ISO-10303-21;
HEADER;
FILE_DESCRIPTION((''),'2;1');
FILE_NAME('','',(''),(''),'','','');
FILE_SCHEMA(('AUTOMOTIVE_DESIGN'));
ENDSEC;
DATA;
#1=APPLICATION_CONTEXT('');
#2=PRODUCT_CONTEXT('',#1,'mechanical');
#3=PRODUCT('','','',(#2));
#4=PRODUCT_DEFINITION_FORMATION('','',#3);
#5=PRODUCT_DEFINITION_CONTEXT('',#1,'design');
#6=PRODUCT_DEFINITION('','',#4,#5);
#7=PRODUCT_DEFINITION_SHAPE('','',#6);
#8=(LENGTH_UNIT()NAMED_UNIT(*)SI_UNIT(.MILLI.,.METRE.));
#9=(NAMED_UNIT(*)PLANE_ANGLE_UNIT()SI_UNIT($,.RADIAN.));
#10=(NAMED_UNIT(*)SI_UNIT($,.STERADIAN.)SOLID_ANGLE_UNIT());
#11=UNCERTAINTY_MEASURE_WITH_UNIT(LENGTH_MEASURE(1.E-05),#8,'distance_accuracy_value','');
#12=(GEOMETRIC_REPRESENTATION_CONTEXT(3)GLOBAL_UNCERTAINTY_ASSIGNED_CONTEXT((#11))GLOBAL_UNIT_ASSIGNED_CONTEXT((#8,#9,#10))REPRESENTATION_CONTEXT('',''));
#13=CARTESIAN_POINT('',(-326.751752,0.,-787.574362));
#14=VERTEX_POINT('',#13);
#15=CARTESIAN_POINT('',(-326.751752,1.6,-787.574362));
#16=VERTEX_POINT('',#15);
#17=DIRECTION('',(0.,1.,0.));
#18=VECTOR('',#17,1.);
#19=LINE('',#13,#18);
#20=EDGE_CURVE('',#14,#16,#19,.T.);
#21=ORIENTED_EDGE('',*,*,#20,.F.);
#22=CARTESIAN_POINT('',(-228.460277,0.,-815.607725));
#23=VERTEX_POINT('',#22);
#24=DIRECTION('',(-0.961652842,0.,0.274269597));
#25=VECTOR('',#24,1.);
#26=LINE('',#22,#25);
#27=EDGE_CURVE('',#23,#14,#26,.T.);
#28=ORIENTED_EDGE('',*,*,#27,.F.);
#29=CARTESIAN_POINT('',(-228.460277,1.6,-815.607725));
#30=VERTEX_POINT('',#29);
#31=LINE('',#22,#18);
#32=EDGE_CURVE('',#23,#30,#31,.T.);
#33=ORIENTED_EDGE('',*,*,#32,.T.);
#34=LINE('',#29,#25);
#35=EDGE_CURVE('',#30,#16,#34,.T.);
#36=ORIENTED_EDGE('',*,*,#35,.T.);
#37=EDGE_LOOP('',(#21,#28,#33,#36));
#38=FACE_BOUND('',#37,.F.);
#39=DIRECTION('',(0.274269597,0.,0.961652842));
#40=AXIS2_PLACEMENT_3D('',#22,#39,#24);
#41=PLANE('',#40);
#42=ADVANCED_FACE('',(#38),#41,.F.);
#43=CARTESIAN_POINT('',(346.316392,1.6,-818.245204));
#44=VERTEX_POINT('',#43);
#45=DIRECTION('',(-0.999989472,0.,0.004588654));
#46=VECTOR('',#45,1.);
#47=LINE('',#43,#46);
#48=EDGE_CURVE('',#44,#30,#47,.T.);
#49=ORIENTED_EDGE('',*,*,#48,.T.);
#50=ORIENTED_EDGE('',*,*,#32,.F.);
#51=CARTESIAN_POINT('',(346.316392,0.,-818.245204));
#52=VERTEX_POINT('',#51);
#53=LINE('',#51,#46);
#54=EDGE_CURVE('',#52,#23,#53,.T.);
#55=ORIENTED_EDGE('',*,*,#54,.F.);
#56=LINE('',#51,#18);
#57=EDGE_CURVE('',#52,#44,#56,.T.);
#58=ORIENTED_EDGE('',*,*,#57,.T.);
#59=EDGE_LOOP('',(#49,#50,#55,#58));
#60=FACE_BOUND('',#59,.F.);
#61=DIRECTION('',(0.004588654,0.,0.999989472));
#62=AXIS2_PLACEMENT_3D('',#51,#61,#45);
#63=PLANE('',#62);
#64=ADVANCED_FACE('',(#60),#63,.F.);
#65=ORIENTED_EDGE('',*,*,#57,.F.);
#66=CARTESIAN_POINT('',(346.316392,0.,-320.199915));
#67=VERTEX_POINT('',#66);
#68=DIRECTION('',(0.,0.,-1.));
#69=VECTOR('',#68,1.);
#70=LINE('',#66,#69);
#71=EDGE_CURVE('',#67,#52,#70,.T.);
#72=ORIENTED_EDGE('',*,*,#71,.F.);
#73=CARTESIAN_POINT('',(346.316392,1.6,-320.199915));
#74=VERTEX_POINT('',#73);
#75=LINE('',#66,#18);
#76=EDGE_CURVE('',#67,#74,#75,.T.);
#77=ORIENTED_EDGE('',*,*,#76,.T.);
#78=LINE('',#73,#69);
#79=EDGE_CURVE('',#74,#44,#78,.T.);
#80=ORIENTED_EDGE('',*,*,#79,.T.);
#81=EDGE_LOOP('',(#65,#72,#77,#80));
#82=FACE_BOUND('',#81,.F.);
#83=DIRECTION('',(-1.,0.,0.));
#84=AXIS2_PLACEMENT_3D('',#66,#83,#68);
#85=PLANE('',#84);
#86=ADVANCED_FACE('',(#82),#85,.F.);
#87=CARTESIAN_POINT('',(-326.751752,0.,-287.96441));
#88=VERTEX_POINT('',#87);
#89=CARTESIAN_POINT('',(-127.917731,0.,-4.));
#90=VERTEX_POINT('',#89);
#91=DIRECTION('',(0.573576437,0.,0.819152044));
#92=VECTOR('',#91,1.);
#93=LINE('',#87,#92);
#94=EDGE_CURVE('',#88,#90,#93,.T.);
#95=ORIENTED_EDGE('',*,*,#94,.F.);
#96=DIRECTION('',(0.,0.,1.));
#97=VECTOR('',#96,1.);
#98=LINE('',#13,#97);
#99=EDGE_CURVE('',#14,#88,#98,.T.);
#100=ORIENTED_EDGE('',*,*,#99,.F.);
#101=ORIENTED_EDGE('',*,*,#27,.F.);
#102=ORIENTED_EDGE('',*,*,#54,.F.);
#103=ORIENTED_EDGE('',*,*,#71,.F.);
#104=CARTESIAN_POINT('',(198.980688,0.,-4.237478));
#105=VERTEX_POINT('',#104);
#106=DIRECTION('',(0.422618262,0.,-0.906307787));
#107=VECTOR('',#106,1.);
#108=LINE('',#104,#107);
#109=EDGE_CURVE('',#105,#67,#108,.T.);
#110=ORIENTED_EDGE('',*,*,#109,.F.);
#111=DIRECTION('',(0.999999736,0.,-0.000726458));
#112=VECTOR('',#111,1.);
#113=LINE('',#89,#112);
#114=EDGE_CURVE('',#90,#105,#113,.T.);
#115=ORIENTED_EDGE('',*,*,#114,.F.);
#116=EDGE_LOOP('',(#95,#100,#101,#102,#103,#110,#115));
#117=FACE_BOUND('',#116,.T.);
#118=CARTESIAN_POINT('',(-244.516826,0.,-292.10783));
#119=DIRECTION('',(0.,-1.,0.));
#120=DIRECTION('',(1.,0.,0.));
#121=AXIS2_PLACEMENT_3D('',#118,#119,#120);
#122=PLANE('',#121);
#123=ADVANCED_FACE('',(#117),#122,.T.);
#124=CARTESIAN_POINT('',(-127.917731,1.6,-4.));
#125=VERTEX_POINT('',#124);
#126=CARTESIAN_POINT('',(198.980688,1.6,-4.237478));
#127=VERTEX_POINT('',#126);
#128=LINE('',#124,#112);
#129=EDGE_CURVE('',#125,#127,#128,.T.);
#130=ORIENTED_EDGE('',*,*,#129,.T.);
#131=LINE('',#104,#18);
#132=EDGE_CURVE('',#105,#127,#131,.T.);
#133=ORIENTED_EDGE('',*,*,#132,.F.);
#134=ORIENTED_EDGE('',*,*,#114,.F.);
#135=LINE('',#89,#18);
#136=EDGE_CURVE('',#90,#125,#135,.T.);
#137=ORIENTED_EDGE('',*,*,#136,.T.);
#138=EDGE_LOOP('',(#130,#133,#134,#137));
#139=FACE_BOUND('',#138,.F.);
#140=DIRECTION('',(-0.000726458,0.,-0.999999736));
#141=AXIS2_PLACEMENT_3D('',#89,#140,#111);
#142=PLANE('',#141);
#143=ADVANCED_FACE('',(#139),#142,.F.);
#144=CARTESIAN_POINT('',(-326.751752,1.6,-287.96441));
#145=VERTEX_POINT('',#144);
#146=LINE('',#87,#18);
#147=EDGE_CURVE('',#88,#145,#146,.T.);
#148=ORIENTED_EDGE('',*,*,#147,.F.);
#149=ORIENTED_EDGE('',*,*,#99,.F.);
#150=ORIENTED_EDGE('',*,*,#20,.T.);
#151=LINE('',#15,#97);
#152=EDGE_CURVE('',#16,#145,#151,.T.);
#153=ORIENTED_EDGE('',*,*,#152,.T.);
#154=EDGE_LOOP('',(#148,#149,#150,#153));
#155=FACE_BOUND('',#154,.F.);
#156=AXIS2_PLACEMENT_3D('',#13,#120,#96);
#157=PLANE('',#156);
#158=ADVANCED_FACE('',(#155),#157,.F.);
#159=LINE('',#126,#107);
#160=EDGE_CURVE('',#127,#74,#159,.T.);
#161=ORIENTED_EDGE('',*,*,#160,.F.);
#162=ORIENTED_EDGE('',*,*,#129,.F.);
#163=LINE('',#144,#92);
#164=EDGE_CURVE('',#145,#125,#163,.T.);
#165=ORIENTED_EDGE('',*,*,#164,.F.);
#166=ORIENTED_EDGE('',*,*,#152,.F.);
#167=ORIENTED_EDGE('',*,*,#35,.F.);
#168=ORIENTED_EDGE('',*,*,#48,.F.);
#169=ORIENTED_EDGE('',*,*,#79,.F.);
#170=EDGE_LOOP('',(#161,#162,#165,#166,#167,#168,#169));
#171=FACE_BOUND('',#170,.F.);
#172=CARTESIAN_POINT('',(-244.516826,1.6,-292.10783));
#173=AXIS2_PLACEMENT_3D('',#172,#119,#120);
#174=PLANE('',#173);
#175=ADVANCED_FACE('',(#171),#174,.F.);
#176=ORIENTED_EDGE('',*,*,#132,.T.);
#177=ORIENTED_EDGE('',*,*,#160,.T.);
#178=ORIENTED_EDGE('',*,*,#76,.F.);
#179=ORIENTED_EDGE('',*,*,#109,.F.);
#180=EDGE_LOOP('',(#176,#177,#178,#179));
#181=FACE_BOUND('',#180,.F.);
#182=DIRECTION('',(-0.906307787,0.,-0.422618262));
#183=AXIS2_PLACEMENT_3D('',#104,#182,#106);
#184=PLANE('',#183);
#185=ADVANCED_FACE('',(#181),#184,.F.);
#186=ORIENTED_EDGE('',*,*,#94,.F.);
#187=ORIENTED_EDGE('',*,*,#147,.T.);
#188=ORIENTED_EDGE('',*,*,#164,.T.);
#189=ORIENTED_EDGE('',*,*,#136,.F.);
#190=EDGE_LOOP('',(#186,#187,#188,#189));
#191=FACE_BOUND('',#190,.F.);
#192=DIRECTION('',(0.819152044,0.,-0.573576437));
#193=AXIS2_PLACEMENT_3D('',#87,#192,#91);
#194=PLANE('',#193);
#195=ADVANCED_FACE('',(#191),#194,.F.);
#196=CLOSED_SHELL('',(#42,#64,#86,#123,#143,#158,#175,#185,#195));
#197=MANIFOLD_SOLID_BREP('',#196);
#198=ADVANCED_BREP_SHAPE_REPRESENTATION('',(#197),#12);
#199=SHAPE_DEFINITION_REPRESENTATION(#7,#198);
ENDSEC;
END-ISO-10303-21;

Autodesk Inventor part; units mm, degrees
ref_plane "YZ Plane" through (0, 0, 0) normal (1, 0, 0) x (0, 1, 0)
ref_plane "XZ Plane" through (0, 0, 0) normal (0, 1, 0) x (-1, 0, 0)
ref_plane "XY Plane" through (0, 0, 0) normal (0, 0, 1) x (1, 0, 0)
ref_plane "Work Plane1" through (-244.516826, 0, -292.10783) normal (0, -1, 0) x (1, 0, 0)
sketch "Sketch1" plane through (-244.516826, 0, -292.10783) normal (0, -1, 0) x (1, 0, 0)
  line L0 (-82.234926, -443.016385) -> (-82.234926, 4.14342)
  line L1 (16.056549, -523.499895) -> (-89.634926, -493.408338)
  line L2 (-82.234926, 4.14342) -> (116.599095, 288.10783)
  line L3 (116.599095, 288.10783) -> (240.516826, 288.10783)
  line L4 (590.833218, -28.092085) -> (443.497514, 287.870352)
  line L5 (590.833218, -526.137374) -> (590.833218, -28.092085)
  point P0 (244.516826, 292.10783)
sketch "Sketch2" plane through (-244.516826, 0, -292.10783) normal (0, -1, 0) x (1, 0, 0)
  line L0 (16.056549, -523.499895) -> (-82.234926, -495.466532)
  line L1 (-82.234926, -495.466532) -> (-82.234926, 4.14342)
  line L2 (-82.234926, 4.14342) -> (116.599095, 288.10783)
  line L3 (116.599095, 288.10783) -> (443.497514, 287.870352)
  line L4 (443.497514, 287.870352) -> (590.833218, -28.092085)
  line L5 (590.833218, -28.092085) -> (590.833218, -526.137374)
  line L6 (590.833218, -523.499895) -> (16.056549, -523.499895)
  point P0 (244.516826, 292.10783)
sketch "Sketch2 outline for Plate extrude" plane through (-244.516826, 0, -292.10783) normal (0, -1, 0) x (1, 0, 0)
  line L0 (16.056549, -523.499895) -> (-82.234926, -495.466532)
  line L1 (-82.234926, -495.466532) -> (-82.234926, 4.14342)
  line L2 (-82.234926, 4.14342) -> (116.599095, 288.10783)
  line L3 (116.599095, 288.10783) -> (443.497514, 287.870352)
  line L4 (443.497514, 287.870352) -> (590.833218, -28.092085)
  line L5 (590.833218, -28.092085) -> (590.833218, -526.137374)
  line L6 (590.833218, -526.137374) -> (16.056549, -523.499895)
extrude "Plate extrude" add sketch "Sketch2 outline for Plate extrude" against normal blind 1.6
sketch "Sketch3" plane through (-244.516826, 0, -292.10783) normal (0, -1, 0) x (1, 0, 0)
  circle A0 centre (303.423661, -47.967523) radius 80.5 construction
  circle A1 centre (303.423661, -45.120279) radius 75 construction
  line L0 (153.423661, 104.879721) -> (453.423661, 104.879721)
  line L1 (453.423661, 104.879721) -> (453.423661, -195.120279)
  line L2 (453.423661, -195.120279) -> (153.423661, -195.120279)
  line L3 (153.423661, -195.120279) -> (153.423661, 104.879721)
  line L4 (153.423661, 104.879721) -> (453.423661, -195.120279) construction
  line L5 (453.423661, 104.879721) -> (153.423661, -195.120279) construction
  point P0 (244.516826, 292.10783)
  dimension "d3" = 300
  dimension "d4" = 300
extrude "Tailstock door" [suppressed]
sketch "Sketch4" plane through (-244.516826, 0, -292.10783) normal (0, -1, 0) x (1, 0, 0)
  circle A0 centre (303.423661, -45.120279) radius 75 construction
  circle A1 centre (303.423661, -45.120279) radius 81.28
  circle A2 centre (303.423661, -45.330045) radius 80.5 construction
  point P0 (244.516826, 292.10783)
  dimension "d7" = 162.56
  dimension "d8" = 161
extrude "Headstock cut out" [suppressed]
sketch "Sketch5" plane through (-244.516826, 1.6, -292.10783) normal (0, 1, 0) x (1, 0, 0)
  point P0 (244.516826, -292.10783)
  point P1 (303.423661, 45.330045)
properties part number "side cover plate.ipt-01"
